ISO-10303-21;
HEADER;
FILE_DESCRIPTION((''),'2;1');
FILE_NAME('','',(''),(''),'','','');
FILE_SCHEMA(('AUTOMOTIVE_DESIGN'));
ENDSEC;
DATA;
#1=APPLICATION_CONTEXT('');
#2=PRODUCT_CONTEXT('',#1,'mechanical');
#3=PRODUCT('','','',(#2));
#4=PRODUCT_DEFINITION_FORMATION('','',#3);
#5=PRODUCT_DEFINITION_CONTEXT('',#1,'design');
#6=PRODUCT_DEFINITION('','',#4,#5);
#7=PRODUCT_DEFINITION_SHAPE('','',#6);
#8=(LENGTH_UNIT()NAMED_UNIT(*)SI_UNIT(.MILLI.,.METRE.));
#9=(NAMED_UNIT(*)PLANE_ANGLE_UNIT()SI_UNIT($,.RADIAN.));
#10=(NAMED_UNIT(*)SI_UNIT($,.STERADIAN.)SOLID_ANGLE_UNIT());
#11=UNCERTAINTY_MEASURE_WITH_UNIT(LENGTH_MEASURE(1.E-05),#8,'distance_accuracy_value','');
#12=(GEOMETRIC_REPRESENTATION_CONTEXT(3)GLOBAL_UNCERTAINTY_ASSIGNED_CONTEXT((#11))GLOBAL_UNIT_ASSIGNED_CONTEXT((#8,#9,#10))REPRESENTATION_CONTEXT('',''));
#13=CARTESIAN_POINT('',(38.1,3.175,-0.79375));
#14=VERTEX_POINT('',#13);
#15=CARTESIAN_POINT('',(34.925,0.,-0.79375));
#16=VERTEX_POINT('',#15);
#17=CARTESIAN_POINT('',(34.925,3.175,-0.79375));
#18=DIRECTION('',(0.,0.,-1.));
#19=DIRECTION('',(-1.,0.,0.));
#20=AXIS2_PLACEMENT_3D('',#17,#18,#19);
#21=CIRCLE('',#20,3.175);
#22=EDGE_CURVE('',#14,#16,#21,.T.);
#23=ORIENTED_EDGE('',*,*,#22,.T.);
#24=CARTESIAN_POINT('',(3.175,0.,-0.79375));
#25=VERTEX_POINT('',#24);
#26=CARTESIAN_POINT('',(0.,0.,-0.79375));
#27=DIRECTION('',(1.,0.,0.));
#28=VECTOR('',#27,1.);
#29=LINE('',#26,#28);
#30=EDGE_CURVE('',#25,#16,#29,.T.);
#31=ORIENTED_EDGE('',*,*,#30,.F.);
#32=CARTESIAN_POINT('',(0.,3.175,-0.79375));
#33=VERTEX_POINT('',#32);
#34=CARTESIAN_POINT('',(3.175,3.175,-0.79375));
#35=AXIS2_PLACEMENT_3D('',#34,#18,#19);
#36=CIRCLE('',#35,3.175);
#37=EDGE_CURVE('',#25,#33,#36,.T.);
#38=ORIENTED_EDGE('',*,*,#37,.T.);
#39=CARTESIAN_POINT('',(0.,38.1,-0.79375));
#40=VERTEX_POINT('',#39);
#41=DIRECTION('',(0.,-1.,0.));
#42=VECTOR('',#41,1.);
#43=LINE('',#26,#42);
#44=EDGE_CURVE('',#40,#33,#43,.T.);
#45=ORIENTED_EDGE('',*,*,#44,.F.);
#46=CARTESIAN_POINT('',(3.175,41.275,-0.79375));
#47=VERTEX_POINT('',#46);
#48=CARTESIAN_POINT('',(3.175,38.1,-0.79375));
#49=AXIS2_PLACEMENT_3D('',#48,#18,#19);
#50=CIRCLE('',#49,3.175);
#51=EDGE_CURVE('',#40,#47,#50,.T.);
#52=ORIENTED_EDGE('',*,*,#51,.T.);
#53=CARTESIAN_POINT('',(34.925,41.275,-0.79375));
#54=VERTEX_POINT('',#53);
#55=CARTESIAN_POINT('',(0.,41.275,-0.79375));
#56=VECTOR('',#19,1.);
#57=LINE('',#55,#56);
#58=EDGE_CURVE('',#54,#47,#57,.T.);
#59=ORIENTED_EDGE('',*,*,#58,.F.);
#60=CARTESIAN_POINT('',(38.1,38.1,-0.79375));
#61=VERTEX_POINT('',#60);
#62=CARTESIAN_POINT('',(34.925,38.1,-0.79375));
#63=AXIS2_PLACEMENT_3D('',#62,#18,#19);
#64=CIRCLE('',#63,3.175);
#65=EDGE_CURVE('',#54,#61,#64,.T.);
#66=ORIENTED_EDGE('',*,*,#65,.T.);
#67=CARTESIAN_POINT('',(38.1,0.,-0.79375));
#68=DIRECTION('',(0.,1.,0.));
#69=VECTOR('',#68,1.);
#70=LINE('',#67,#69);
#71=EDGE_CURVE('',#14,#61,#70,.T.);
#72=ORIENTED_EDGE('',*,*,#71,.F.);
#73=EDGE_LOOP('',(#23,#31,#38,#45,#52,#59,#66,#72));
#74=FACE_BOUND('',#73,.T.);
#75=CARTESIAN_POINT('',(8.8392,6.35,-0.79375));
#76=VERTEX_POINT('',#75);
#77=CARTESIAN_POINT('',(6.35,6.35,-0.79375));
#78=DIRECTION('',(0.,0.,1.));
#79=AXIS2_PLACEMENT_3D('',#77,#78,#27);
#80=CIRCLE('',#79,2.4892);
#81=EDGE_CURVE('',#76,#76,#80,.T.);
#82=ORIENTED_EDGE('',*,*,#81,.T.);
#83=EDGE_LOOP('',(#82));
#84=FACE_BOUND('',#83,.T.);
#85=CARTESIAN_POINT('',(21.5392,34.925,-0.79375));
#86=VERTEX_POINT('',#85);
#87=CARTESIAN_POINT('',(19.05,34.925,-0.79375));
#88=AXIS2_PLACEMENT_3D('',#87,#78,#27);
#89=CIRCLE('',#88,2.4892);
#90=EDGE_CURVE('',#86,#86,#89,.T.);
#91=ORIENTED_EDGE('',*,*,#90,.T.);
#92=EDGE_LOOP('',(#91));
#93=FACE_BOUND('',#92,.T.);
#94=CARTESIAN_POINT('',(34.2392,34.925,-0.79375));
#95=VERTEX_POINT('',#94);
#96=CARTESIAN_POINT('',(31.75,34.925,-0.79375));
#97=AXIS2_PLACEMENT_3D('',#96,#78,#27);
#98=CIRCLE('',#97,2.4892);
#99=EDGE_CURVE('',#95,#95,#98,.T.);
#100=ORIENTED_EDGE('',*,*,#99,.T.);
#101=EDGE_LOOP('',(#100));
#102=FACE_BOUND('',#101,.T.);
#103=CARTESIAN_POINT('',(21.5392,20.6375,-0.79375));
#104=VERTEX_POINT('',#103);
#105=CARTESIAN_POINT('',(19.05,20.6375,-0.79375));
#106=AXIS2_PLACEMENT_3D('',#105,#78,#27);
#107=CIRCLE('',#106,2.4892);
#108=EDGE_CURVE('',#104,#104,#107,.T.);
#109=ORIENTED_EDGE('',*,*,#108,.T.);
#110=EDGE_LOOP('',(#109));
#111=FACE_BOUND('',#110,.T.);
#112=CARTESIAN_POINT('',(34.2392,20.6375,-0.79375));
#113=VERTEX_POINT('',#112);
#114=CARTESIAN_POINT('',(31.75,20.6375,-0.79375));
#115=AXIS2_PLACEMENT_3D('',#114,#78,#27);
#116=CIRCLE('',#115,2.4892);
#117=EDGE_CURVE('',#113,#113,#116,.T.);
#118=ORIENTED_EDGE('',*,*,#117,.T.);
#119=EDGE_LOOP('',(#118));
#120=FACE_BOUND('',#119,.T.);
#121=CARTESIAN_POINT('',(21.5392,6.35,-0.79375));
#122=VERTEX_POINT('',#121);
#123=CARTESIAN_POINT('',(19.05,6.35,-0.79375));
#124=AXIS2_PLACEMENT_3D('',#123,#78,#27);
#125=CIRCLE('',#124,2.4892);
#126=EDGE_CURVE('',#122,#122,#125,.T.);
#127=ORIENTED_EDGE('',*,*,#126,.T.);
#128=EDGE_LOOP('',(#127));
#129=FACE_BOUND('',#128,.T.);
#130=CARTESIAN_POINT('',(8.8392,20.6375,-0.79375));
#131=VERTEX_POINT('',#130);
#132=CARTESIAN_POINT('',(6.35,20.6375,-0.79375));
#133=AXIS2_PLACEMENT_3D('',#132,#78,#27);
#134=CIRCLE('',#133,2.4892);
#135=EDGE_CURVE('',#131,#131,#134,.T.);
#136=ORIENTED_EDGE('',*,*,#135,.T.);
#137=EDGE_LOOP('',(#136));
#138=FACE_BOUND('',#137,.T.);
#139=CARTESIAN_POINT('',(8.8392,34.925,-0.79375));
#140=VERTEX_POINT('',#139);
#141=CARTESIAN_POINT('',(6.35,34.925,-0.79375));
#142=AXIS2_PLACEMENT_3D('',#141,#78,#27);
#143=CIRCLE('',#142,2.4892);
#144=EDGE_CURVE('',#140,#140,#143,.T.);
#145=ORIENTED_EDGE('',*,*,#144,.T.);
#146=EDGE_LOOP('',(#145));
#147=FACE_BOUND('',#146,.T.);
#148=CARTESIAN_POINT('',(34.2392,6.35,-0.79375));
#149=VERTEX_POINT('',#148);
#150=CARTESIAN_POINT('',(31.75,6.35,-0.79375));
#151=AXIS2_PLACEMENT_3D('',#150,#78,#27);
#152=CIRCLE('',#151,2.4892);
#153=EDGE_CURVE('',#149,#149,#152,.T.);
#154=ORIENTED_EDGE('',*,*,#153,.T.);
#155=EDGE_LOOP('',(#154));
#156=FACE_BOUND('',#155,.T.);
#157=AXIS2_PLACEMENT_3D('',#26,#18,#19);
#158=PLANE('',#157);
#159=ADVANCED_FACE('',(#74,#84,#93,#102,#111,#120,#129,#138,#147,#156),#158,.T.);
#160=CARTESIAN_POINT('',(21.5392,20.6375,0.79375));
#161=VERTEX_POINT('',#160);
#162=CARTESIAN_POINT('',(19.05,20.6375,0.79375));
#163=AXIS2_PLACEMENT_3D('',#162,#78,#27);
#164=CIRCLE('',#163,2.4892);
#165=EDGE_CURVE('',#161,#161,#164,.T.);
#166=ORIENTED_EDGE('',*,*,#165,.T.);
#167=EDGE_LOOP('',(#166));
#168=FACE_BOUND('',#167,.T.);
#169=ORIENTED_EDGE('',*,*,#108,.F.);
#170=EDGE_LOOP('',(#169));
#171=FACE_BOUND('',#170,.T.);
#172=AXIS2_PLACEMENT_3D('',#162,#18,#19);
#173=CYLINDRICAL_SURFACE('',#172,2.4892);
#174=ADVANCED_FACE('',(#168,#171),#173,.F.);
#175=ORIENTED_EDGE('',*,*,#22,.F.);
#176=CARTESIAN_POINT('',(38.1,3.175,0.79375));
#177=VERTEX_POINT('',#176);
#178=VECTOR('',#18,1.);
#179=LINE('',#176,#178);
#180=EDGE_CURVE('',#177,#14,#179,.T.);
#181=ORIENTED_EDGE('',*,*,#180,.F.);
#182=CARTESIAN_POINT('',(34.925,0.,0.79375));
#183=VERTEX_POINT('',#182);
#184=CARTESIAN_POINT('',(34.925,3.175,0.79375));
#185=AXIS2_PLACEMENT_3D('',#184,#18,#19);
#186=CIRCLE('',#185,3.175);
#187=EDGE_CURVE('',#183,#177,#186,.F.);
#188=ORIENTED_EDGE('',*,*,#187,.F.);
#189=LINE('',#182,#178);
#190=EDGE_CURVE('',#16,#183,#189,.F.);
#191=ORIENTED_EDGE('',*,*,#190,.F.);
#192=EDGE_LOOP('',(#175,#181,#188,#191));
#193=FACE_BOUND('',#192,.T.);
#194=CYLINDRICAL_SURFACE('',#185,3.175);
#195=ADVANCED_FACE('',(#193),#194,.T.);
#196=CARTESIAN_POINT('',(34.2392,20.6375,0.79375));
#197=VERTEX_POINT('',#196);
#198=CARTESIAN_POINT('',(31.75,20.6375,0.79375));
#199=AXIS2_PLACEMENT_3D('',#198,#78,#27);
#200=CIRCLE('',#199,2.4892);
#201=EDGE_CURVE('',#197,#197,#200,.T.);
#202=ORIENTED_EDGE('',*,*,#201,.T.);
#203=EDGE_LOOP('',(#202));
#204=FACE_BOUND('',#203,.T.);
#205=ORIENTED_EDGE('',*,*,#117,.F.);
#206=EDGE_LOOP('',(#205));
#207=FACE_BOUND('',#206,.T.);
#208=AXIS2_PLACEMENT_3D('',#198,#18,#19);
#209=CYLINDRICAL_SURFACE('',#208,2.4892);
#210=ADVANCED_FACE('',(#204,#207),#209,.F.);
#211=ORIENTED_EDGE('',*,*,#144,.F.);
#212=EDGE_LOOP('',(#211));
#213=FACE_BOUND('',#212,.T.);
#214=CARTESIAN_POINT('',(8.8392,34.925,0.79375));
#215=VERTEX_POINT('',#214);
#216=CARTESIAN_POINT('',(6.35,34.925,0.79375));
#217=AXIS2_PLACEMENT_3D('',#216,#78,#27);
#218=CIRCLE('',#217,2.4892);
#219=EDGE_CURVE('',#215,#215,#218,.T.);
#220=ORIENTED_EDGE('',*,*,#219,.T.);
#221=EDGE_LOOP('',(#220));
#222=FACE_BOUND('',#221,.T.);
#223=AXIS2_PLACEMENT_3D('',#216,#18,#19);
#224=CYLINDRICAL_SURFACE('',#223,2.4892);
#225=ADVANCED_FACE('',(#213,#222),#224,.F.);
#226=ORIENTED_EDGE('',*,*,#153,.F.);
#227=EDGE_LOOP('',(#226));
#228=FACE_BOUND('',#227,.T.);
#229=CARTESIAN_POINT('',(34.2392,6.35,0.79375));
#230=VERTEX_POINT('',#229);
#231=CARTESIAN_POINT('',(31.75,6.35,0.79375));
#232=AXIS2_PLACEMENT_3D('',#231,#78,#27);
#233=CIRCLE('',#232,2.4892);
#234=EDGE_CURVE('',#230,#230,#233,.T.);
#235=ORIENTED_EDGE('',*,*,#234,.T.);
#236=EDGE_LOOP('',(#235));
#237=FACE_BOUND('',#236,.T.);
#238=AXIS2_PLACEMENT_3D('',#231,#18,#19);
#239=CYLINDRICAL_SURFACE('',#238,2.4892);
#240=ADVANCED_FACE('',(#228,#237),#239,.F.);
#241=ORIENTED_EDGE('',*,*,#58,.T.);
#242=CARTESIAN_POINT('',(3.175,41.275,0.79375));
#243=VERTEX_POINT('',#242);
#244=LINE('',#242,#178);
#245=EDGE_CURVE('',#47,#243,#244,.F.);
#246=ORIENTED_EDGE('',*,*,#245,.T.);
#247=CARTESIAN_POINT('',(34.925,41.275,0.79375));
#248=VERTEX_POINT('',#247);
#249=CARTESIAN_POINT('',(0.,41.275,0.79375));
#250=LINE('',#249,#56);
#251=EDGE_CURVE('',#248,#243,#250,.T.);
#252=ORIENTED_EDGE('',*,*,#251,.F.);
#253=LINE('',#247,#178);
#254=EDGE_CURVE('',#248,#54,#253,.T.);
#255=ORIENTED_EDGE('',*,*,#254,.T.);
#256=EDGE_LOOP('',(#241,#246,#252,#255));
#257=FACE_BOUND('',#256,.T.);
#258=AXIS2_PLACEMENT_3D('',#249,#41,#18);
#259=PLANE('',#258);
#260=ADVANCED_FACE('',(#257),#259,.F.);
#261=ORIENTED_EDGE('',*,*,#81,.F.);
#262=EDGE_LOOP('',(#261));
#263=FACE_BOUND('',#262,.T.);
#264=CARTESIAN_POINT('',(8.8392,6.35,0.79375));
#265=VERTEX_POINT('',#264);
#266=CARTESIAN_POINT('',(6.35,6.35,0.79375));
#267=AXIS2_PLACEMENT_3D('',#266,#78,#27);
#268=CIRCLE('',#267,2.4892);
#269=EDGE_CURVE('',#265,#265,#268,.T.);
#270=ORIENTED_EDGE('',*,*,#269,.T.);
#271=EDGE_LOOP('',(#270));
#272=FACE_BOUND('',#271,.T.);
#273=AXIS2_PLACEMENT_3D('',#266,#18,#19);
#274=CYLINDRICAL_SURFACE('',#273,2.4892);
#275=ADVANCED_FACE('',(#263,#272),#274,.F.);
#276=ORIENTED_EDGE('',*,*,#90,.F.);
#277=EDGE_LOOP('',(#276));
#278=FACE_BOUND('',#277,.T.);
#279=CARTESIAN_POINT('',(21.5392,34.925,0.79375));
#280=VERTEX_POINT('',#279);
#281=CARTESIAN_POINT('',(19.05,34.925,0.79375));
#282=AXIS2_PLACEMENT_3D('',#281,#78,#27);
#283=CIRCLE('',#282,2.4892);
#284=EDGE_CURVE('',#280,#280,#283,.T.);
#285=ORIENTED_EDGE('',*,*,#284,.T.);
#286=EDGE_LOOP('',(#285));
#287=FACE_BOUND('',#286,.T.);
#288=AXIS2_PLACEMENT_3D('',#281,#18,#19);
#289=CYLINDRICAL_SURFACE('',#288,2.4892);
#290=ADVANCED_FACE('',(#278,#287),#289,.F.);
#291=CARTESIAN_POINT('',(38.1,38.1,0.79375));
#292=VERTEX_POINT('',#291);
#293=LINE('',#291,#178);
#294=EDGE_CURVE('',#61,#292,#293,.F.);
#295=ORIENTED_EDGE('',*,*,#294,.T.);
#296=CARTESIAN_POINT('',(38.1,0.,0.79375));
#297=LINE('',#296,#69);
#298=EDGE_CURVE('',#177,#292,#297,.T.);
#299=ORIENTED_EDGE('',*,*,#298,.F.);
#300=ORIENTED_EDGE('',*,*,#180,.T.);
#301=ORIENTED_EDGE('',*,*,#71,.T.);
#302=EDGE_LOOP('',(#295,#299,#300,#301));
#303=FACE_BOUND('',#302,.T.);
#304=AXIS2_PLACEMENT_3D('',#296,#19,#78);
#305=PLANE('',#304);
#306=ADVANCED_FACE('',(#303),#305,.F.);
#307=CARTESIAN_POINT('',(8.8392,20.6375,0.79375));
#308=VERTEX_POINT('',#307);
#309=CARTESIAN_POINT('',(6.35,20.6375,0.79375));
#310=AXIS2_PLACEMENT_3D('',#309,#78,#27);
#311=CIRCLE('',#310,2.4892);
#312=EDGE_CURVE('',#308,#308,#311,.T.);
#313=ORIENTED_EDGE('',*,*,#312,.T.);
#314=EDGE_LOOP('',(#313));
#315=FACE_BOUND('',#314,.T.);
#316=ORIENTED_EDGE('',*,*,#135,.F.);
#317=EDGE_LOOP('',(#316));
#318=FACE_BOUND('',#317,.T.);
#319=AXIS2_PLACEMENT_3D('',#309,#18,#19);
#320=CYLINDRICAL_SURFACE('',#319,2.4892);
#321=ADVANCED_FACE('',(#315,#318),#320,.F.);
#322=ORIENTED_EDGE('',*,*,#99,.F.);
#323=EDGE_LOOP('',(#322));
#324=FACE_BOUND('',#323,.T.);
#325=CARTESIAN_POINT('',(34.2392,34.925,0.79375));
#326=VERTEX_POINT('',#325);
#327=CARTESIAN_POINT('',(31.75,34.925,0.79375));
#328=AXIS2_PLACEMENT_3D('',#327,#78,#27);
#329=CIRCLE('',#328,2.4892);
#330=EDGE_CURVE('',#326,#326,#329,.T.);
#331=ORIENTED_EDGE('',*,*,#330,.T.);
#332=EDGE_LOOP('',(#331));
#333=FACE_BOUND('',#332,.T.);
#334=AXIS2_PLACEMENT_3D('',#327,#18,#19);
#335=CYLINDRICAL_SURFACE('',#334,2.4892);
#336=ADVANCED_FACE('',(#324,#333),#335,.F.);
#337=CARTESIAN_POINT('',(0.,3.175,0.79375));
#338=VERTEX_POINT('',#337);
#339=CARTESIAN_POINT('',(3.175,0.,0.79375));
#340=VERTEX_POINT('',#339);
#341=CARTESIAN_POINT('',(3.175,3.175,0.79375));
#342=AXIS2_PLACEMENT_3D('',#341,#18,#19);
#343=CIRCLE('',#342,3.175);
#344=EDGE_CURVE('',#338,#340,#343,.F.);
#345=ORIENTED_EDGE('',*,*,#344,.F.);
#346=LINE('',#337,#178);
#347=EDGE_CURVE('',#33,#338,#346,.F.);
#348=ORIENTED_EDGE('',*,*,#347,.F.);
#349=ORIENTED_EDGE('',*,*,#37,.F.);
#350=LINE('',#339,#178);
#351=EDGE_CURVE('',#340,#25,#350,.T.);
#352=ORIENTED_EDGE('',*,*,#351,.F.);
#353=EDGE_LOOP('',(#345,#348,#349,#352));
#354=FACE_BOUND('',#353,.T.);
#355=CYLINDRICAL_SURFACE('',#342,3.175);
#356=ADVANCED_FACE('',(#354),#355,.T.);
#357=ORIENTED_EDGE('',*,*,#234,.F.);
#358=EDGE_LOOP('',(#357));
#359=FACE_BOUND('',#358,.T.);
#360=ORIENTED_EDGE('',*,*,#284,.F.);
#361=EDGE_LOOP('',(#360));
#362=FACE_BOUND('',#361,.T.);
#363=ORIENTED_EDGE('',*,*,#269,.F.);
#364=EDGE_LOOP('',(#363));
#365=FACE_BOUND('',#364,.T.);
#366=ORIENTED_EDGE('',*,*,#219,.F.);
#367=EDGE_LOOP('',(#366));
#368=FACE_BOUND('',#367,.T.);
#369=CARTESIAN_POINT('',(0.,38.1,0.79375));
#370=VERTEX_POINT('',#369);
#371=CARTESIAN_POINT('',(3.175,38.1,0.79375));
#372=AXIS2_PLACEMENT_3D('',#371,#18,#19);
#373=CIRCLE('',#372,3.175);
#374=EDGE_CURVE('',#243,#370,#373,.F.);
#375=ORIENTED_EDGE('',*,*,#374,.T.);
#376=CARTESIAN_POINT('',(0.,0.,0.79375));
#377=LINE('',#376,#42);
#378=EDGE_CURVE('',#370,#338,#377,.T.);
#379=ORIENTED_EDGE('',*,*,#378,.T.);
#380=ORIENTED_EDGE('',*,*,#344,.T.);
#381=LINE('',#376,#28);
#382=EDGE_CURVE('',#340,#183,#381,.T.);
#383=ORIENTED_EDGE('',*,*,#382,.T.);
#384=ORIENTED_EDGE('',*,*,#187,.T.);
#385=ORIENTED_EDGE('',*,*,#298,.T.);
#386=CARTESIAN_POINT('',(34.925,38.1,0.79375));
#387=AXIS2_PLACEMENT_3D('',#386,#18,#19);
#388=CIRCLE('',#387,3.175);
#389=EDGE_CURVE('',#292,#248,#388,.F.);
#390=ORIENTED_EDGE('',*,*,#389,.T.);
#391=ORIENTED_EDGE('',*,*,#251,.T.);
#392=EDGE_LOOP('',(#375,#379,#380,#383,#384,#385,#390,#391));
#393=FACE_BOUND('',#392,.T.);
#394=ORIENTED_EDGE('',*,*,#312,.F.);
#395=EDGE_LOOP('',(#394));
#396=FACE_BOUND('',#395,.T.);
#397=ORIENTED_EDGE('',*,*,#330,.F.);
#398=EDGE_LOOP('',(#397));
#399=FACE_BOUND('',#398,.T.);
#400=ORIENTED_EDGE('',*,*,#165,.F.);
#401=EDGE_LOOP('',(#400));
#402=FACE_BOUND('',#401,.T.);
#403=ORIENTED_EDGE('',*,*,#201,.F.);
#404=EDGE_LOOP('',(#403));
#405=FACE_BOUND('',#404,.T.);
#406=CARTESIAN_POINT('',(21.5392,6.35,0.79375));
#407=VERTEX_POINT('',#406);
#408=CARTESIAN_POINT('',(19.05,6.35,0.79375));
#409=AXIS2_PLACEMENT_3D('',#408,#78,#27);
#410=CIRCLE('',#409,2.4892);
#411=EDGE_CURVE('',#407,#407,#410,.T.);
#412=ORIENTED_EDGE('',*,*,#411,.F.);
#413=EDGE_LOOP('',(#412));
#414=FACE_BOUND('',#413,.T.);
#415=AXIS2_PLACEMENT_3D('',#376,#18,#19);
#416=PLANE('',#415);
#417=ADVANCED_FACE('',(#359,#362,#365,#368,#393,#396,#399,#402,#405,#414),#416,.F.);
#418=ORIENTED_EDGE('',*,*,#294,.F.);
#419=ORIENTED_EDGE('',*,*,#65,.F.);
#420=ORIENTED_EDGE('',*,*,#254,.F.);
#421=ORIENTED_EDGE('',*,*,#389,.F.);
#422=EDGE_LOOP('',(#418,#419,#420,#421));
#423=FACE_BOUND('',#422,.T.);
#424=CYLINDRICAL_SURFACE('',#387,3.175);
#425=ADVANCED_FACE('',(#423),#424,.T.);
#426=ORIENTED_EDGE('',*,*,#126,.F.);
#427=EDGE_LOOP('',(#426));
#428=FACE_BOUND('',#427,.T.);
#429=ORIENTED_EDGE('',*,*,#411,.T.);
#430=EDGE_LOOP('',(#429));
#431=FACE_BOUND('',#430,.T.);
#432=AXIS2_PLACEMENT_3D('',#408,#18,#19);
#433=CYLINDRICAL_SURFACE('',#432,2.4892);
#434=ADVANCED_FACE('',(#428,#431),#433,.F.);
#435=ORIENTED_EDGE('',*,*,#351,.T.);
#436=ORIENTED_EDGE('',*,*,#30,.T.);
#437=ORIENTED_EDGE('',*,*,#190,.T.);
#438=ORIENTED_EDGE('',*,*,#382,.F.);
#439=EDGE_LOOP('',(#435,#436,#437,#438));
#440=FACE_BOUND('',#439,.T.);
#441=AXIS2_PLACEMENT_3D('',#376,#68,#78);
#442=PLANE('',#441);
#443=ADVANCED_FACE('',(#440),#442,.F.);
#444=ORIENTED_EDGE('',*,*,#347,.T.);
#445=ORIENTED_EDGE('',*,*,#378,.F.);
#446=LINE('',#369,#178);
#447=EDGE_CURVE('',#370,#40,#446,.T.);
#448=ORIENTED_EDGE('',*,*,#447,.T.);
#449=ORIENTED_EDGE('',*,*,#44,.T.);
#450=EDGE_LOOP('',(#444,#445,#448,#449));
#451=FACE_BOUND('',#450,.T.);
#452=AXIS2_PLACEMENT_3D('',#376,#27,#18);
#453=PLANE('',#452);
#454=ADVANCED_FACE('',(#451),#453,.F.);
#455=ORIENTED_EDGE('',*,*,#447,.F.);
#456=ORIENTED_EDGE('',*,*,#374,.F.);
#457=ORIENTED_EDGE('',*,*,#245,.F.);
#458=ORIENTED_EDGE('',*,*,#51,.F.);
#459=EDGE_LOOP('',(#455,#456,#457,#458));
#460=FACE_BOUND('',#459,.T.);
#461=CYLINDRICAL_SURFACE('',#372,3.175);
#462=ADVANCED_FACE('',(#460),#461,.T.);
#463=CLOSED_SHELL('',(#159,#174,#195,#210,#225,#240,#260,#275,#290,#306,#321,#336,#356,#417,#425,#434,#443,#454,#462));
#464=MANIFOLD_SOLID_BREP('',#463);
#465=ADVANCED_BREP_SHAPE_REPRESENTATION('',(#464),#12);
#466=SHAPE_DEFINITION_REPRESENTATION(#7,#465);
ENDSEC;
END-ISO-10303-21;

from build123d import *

# Parameters (mm, degrees)
SKETCH1_W           = 38.1
SKETCH1_H           = 41.275
SKETCH1_R           = 2.4892
BOSS_EXTRUDE1_DEPTH = 0.79375
LPATTERN1_START     = -0.79375
LPATTERN1_OUTLINE_R = 2.4892
LPATTERN1_DEPTH     = 1.5875
FILLET1_R           = 3.175


# Read off the part's stored shape, not the designer's step: LPattern1
with BuildPart() as part:
    # Sketch1 → Boss-Extrude1 (new, symmetric)
    with BuildSketch(Plane.XY):
        with Locations((19.05, 20.6375)):
            Rectangle(SKETCH1_W, SKETCH1_H)
        with Locations((6.35, 6.35)):
            Circle(SKETCH1_R, mode=Mode.SUBTRACT)
    extrude(amount=BOSS_EXTRUDE1_DEPTH, both=True)

    # LPattern1 outline → LPattern1 (cut)
    with BuildSketch(Plane.XY.offset(LPATTERN1_START)):
        with Locations((31.75, 34.925)):
            Circle(LPATTERN1_OUTLINE_R)
        with Locations((31.75, 20.6375)):
            Circle(LPATTERN1_OUTLINE_R)
        with Locations((31.75, 6.35)):
            Circle(LPATTERN1_OUTLINE_R)
        with Locations((19.05, 34.925)):
            Circle(LPATTERN1_OUTLINE_R)
        with Locations((19.05, 20.6375)):
            Circle(LPATTERN1_OUTLINE_R)
        with Locations((19.05, 6.35)):
            Circle(LPATTERN1_OUTLINE_R)
        with Locations((6.35, 34.925)):
            Circle(LPATTERN1_OUTLINE_R)
        with Locations((6.35, 20.6375)):
            Circle(LPATTERN1_OUTLINE_R)
    extrude(amount=LPATTERN1_DEPTH, mode=Mode.SUBTRACT)

    # Fillet1
    fillet1_edges = [part.edges().sort_by_distance(p)[0] for p in [
        (0, 41.275, 0),
        (38.1, 41.275, 0),
        (38.1, 0, 0),
        (0, 0, 0),
    ]]
    fillet(fillet1_edges, radius=FILLET1_R)


solid = part.part
